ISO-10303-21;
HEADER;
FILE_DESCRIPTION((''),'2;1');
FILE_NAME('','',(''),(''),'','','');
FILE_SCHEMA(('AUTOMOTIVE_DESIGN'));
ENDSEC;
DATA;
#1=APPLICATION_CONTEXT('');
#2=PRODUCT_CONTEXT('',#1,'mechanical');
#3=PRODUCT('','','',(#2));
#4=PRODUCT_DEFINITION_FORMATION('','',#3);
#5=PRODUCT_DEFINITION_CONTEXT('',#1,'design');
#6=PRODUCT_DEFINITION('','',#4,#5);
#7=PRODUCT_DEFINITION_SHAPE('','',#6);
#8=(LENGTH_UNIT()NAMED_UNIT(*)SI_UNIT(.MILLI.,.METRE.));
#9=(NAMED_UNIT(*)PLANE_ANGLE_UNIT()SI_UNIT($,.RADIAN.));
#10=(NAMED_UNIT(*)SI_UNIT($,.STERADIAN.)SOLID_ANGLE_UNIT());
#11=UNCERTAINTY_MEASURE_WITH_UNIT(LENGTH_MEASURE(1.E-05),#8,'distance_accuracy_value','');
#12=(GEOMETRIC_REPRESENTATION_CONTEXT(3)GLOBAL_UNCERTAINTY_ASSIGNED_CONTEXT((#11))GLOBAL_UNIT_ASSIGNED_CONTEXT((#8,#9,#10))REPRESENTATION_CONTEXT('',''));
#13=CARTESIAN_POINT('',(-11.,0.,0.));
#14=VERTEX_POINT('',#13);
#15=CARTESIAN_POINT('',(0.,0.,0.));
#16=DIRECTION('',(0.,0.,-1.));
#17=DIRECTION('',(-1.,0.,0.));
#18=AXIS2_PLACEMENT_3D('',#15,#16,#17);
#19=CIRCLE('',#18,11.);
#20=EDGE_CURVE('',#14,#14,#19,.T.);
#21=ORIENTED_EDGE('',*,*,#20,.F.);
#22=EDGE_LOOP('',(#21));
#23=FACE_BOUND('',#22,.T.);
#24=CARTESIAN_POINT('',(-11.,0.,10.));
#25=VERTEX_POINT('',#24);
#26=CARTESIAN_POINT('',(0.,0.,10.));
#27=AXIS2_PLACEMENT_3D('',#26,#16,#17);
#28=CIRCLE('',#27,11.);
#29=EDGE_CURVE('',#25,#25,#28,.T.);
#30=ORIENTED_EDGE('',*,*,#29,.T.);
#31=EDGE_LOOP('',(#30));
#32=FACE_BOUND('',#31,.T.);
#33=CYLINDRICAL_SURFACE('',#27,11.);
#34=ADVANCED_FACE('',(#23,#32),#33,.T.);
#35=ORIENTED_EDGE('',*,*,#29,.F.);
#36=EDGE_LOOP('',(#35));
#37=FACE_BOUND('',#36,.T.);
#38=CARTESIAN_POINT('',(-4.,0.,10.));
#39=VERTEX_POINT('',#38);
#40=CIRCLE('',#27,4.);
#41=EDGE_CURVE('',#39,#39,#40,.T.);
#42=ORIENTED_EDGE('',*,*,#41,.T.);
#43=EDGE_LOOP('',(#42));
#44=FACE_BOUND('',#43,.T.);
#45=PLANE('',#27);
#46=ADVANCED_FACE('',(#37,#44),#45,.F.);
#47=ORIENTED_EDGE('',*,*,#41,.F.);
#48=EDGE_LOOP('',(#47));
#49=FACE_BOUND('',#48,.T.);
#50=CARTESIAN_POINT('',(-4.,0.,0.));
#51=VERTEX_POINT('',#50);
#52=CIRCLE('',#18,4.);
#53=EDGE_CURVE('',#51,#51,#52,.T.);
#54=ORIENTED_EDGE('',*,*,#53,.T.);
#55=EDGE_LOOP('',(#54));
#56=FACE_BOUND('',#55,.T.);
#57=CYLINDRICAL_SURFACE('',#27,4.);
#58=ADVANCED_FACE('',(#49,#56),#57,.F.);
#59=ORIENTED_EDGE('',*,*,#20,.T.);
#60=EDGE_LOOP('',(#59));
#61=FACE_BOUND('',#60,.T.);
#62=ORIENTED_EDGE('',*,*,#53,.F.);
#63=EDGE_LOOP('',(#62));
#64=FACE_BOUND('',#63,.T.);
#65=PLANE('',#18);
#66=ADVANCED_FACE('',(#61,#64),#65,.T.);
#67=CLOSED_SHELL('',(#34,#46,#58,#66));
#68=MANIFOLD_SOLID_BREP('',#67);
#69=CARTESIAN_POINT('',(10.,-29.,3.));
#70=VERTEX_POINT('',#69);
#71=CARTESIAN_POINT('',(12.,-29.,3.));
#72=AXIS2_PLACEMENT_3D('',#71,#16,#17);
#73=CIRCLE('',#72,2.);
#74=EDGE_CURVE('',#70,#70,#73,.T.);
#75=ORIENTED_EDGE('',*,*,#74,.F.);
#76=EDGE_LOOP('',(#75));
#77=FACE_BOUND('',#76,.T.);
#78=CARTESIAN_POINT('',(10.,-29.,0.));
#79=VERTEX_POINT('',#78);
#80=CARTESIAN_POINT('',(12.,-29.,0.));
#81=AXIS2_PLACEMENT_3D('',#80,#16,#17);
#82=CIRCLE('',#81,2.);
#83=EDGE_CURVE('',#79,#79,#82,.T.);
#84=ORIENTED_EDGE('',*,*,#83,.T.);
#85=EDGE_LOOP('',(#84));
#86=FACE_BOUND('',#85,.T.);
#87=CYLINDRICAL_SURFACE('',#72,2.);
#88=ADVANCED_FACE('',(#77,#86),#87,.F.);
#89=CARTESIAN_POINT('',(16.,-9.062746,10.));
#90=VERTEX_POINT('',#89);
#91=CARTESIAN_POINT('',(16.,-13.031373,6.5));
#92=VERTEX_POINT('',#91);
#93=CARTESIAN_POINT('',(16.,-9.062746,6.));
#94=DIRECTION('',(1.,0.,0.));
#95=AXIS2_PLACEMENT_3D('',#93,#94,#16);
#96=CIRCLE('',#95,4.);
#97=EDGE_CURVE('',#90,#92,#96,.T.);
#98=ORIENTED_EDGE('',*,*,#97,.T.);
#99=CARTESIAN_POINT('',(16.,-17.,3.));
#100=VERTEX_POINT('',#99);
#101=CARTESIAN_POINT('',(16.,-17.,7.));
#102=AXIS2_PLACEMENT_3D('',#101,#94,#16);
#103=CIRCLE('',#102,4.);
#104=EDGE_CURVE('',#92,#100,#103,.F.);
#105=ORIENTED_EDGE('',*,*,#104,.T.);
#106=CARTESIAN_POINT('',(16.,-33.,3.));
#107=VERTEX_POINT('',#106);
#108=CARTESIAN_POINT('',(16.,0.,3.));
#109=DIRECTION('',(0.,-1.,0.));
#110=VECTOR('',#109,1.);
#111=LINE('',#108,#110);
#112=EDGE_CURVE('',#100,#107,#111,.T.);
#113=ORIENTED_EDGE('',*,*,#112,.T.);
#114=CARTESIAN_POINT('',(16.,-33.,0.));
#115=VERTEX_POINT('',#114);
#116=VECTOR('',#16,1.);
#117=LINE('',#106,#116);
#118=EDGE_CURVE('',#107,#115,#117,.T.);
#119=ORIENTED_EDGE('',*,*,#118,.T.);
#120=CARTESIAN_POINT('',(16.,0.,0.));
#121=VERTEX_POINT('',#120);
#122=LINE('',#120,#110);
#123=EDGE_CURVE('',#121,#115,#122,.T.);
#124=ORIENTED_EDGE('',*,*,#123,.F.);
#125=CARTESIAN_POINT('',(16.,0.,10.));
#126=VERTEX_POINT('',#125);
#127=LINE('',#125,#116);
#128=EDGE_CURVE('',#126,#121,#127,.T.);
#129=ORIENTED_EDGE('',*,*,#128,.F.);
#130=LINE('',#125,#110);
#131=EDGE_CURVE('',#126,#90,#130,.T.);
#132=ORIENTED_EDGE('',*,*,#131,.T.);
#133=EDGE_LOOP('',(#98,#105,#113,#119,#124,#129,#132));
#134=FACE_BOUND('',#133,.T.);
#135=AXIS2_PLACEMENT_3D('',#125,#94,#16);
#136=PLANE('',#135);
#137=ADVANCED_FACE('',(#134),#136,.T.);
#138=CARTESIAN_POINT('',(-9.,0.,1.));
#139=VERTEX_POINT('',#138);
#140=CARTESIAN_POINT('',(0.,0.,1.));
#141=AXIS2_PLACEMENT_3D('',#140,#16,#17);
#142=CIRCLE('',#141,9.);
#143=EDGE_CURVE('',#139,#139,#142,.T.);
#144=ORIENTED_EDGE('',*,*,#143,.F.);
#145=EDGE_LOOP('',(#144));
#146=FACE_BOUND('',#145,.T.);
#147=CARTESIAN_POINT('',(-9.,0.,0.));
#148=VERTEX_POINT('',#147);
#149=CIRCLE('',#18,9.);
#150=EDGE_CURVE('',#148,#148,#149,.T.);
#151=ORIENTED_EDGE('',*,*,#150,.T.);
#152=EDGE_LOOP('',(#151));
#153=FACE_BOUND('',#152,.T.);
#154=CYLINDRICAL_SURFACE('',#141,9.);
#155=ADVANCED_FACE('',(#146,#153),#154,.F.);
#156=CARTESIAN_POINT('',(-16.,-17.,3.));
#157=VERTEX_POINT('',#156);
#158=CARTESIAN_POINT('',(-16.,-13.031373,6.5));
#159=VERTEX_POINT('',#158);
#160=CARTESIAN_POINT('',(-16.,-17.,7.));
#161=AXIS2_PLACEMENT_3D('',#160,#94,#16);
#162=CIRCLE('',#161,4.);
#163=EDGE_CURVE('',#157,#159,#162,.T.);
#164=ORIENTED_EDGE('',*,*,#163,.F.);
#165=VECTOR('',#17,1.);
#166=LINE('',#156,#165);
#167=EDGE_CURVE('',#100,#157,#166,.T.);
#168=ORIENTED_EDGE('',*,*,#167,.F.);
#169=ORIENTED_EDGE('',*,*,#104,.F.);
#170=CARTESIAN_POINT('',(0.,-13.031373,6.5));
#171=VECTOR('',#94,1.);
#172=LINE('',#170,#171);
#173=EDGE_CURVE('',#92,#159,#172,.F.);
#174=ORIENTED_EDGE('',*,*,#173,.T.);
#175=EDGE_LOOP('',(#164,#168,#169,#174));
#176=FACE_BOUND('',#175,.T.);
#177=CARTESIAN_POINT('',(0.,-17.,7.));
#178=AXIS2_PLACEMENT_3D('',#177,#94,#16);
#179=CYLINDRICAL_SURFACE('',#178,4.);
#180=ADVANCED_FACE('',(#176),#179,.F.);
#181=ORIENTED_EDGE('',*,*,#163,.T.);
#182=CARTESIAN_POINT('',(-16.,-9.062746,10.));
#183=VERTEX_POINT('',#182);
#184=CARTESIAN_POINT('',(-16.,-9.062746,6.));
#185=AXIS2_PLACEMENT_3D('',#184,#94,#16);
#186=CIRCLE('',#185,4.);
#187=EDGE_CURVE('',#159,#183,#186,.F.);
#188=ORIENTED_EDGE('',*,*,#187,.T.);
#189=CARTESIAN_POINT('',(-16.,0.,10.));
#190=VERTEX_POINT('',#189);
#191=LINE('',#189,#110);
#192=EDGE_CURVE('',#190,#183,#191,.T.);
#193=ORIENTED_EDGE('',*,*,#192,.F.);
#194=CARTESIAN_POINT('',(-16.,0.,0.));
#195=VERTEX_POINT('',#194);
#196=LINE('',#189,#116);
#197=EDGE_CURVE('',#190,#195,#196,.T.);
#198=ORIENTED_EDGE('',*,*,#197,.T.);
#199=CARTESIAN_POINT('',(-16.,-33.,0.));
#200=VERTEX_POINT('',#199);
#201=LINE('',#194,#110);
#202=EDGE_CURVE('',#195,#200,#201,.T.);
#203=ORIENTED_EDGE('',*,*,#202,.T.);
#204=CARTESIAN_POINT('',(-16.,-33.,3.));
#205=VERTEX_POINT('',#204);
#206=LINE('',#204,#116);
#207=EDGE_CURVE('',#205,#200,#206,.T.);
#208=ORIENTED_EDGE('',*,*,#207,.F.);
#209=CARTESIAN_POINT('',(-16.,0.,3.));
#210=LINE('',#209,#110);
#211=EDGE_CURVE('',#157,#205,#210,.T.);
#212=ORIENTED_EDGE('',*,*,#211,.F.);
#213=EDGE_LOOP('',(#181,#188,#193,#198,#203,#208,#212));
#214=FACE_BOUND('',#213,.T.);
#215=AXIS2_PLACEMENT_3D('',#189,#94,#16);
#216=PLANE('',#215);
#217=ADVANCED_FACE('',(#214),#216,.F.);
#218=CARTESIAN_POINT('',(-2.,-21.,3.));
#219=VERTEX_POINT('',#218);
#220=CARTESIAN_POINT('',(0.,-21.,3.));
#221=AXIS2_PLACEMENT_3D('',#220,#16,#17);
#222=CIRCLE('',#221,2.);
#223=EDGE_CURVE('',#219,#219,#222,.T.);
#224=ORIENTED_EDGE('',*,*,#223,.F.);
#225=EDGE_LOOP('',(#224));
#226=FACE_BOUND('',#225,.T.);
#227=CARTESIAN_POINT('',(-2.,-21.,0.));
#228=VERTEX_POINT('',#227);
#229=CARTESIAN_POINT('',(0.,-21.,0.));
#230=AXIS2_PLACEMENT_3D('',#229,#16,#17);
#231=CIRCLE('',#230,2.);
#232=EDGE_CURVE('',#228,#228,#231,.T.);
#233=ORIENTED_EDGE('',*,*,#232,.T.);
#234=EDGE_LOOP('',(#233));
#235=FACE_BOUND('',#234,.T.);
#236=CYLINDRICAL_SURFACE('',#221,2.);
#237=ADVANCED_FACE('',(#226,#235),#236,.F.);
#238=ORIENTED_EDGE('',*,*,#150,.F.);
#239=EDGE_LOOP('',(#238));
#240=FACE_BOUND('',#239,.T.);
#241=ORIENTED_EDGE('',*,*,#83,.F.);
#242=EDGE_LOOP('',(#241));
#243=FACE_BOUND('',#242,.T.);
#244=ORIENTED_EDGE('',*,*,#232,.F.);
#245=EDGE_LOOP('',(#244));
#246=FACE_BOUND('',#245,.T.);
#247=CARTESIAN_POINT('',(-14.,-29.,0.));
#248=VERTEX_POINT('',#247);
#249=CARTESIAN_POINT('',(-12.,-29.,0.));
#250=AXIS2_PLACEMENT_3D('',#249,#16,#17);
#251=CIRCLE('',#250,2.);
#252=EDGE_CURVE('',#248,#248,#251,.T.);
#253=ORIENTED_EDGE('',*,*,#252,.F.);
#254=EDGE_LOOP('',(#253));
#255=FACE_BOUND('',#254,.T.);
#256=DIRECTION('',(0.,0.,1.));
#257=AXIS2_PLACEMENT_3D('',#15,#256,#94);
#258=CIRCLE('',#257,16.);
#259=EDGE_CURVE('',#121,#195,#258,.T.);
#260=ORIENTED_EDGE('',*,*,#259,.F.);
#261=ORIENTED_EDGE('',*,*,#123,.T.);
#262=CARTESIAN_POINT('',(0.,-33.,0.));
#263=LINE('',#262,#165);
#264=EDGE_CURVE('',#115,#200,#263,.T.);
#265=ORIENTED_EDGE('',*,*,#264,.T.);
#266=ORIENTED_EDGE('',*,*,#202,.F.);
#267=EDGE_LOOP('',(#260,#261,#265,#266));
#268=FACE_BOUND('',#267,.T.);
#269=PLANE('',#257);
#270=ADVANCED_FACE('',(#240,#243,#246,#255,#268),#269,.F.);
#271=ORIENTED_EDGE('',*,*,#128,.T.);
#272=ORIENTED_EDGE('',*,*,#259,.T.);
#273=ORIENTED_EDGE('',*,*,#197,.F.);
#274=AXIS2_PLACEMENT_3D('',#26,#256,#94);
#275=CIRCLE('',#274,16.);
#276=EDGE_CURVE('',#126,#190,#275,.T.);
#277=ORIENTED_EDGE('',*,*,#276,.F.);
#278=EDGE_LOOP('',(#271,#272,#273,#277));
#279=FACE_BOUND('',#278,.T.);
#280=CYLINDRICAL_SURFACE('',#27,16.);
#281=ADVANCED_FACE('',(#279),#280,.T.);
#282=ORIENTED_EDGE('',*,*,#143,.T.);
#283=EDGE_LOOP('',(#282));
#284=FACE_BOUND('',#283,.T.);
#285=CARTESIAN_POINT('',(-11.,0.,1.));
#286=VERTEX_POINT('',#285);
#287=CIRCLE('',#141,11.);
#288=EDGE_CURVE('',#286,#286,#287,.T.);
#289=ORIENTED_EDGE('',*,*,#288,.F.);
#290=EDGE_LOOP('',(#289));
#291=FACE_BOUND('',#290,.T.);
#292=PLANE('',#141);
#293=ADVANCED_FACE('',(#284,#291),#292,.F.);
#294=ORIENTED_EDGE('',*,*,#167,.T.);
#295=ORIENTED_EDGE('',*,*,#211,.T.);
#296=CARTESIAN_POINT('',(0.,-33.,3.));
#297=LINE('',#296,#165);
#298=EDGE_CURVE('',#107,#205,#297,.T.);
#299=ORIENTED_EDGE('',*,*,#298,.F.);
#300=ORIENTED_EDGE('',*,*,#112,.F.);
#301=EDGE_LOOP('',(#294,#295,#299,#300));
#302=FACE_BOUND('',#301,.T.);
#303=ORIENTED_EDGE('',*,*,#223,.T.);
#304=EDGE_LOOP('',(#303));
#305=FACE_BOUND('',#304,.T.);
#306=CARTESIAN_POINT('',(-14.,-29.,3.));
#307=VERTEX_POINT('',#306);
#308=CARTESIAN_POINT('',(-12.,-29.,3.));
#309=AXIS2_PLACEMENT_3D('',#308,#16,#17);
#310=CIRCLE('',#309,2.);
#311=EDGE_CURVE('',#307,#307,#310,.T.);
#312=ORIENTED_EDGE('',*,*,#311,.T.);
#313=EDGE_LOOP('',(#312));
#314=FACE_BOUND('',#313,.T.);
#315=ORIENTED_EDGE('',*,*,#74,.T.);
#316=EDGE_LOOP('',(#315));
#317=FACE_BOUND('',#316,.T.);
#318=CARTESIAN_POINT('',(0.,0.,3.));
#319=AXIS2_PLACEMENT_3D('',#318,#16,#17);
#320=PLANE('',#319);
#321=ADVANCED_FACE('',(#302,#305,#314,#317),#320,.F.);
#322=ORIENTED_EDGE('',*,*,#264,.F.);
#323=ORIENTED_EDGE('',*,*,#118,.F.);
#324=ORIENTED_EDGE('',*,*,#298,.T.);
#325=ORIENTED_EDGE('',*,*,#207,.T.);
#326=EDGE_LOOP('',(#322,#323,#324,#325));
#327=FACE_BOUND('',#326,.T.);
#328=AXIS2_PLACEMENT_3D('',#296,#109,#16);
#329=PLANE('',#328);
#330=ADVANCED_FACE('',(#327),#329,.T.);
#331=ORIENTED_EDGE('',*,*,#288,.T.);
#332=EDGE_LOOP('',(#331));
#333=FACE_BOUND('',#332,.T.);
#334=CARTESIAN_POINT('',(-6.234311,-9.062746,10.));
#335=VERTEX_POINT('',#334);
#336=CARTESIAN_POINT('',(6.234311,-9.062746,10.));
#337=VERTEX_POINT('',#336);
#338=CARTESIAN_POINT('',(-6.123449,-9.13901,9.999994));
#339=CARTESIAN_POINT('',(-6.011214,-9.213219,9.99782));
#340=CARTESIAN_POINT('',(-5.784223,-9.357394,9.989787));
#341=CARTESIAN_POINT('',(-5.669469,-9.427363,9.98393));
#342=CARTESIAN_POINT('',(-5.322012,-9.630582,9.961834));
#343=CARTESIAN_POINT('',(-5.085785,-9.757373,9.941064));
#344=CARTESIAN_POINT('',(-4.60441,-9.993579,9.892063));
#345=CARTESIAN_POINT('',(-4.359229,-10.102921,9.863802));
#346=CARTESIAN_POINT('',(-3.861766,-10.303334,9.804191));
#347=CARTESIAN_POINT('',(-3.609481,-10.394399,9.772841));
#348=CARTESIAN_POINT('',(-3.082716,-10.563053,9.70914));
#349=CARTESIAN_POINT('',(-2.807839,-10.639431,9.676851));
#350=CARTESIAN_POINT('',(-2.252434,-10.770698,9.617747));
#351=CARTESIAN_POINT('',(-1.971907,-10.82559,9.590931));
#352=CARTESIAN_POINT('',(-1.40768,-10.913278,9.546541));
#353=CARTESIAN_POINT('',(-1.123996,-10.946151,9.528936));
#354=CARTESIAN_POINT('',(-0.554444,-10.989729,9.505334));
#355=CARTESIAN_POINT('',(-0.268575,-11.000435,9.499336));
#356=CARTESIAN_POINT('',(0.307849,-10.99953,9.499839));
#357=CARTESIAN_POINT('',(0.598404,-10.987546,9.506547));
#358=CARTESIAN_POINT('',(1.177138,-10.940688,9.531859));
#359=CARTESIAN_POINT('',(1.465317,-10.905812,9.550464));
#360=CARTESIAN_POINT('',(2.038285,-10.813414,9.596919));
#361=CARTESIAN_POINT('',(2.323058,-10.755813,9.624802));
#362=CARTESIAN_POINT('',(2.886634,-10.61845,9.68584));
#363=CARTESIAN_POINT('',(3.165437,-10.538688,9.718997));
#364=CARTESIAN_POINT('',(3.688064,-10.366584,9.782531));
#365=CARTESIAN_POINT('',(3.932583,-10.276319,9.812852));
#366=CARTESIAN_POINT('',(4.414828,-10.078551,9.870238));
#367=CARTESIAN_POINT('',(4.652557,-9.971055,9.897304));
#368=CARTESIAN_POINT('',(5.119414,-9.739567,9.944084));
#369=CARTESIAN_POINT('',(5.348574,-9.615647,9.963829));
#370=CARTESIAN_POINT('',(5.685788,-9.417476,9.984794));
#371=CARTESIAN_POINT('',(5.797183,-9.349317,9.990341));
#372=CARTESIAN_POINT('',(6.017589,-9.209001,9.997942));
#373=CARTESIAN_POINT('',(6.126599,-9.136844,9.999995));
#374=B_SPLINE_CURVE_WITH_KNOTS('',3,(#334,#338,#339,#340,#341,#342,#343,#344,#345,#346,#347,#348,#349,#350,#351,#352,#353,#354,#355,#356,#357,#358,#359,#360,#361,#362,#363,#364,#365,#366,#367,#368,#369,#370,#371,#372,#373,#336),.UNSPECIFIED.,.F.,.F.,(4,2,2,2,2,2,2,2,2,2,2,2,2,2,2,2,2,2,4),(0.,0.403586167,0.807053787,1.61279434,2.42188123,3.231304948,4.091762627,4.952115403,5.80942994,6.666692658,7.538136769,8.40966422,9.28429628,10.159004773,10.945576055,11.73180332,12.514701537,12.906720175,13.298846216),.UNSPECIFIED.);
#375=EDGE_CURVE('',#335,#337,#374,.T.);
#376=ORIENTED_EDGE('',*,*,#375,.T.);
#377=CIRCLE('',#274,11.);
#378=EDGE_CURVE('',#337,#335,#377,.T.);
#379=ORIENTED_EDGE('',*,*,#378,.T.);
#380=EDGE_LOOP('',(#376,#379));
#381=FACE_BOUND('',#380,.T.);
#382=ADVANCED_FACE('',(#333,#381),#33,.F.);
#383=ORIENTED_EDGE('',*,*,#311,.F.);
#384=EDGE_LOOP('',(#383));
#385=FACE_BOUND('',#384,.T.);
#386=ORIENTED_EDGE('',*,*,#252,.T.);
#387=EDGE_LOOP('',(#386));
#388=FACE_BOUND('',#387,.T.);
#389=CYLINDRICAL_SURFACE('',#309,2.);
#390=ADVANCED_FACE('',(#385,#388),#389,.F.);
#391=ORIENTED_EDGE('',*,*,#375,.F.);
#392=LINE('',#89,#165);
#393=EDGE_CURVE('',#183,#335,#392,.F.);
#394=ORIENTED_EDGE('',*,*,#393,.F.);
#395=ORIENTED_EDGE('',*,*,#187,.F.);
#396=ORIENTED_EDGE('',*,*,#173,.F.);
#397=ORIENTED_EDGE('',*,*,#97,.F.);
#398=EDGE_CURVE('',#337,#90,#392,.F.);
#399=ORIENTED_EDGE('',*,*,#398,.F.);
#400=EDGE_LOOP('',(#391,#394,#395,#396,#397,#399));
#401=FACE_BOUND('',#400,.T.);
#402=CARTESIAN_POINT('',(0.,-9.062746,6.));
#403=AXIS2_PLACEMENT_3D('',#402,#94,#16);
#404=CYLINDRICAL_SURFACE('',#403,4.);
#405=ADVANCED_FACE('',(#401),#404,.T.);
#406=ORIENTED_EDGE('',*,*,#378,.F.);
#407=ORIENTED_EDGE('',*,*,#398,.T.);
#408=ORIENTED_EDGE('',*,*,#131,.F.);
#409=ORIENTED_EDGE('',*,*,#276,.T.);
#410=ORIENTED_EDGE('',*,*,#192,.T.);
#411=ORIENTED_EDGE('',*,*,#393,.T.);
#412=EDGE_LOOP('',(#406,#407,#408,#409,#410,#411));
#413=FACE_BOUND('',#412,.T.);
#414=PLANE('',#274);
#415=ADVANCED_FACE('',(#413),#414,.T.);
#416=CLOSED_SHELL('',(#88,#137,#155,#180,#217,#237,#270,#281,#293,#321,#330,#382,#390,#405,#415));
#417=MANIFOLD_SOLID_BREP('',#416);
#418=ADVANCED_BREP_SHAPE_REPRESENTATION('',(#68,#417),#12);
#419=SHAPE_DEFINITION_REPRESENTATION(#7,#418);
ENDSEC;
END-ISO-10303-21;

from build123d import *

# Parameters (mm, degrees)
SKETCH1_R           = 11
BOSS_EXTRUDE1_DEPTH = 10
SKETCH2_R           = 11
SKETCH2_R_2         = 4
BOSS_EXTRUDE2_DEPTH = 10
SKETCH3_W           = 32
SKETCH3_H           = 20
SKETCH3_R           = 2
BOSS_EXTRUDE3_DEPTH = 3
FILLET2_R           = 4
FILLET3_R           = 4
SKETCH5_R           = 13
SKETCH5_R_2         = 9
BOSS_EXTRUDE5_DEPTH = 1


with BuildPart() as part:
    # Sketch1 → Boss-Extrude1 (new body)
    with BuildSketch(Plane.XY):
        with BuildLine():
            Line((-16, 0), (-16, -13))
            Line((-16, -13), (16, -13))
            Line((16, -13), (16, 0))
            ThreePointArc((16, 0), (0, 16), (-16, 0))
        make_face()
        Circle(SKETCH1_R, mode=Mode.SUBTRACT)
    extrude(amount=BOSS_EXTRUDE1_DEPTH)

    # Sketch3 → Boss-Extrude3 (add)
    with BuildSketch(Plane(origin=(0, 0, 0), x_dir=(-1, 0, 0), z_dir=(0, 0, -1))):
        with Locations((0, -23)):
            Rectangle(SKETCH3_W, SKETCH3_H)
        with Locations((0, -21)):
            Circle(SKETCH3_R, mode=Mode.SUBTRACT)
        with Locations((12, -29)):
            Circle(SKETCH3_R, mode=Mode.SUBTRACT)
        with Locations((-12, -29)):
            Circle(SKETCH3_R, mode=Mode.SUBTRACT)
    extrude(amount=-BOSS_EXTRUDE3_DEPTH)

    # Fillet2
    fillet2_edges = [part.edges().sort_by_distance(p)[0] for p in [
        (0, -13, 3),
    ]]
    fillet(fillet2_edges, radius=FILLET2_R)

    # Fillet3
    # the kernel refuses this fillet: 4 mm, written as the material it takes off along each edge
    with BuildSketch(Plane(origin=(-25.843134833, -13, 10), x_dir=(0, -0.008963363740973368, -0.9999598282483386), z_dir=(1, 0, 0))) as fillet3_piece_1:
        with BuildLine():
            CenterArc((3.964548274, 3.972949222), FILLET3_R, 180.51356979, 82.819244219)
            Line((-0.035291039, 3.937095767), (-0.43527497, 3.933510421))
            Line((-0.43527497, 3.933510421), (-0.399983931, -0.003585345))
            Line((-0.399983931, -0.003585345), (0.003585345, -0.399983931))
            ThreePointArc((0.003585345, -0.399983931), (3.00346483, -0.37309384), (3.45369984, -0.397294922))
            Line((3.45369984, -0.397294922), (3.500140607, 0))
        make_face()
    extrude(amount=51.686269666, mode=Mode.SUBTRACT)

    # Sketch5 → Boss-Extrude5 (add)
    with BuildSketch(Plane(origin=(0, 0, 0), x_dir=(-1, 0, 0), z_dir=(0, 0, -1))):
        Circle(SKETCH5_R)
        Circle(SKETCH5_R_2, mode=Mode.SUBTRACT)
    extrude(amount=-BOSS_EXTRUDE5_DEPTH)


with BuildPart() as body_2:
    # Sketch2 → Boss-Extrude2 (new body)
    with BuildSketch(Plane(origin=(0, 0, 0), x_dir=(-1, 0, 0), z_dir=(0, 0, -1))):
        Circle(SKETCH2_R)
        Circle(SKETCH2_R_2, mode=Mode.SUBTRACT)
    extrude(amount=-BOSS_EXTRUDE2_DEPTH)


solid = Compound([part.part, body_2.part])
